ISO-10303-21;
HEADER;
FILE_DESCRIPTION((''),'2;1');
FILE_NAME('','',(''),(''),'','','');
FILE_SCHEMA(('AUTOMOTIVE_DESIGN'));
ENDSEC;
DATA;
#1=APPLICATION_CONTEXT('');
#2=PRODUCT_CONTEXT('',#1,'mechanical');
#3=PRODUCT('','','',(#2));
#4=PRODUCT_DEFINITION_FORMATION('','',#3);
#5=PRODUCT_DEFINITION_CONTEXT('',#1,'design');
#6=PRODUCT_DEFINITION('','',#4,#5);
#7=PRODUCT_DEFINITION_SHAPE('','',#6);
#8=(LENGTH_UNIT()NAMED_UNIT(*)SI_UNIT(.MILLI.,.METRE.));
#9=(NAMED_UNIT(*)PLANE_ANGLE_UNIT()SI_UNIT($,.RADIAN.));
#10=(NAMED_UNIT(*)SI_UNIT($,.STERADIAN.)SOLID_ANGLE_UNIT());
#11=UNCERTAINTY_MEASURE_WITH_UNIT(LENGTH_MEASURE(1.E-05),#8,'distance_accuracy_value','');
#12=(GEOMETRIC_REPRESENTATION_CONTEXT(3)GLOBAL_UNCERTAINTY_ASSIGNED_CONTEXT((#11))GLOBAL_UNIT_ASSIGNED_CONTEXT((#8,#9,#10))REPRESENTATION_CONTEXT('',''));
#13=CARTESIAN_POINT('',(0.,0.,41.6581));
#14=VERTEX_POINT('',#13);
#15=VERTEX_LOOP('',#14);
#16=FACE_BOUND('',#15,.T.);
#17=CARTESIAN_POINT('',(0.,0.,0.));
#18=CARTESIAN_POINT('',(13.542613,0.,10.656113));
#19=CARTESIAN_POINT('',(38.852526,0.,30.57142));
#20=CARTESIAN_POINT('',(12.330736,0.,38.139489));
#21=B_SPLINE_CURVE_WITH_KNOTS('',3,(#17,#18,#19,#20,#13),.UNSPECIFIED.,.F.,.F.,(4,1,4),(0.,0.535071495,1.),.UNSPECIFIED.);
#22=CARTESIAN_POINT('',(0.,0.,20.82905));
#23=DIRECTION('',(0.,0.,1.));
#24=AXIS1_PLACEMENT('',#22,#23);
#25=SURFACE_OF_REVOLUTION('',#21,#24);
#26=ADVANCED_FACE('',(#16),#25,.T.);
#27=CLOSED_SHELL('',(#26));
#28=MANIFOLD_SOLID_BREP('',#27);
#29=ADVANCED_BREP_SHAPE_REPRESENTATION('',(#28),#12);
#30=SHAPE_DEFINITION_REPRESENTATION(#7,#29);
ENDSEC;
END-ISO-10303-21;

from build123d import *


# Not quite as in the source:
# - the program builds the solid bodies; features that only make, move or delete a surface that nothing else refers to are left out


with BuildPart() as f1:
    # F0 (on Front) → F1 (revolve)
    with BuildSketch(Plane.XZ):
        with BuildLine():
            Line((0, 20.6253648025), (0, 0))
            add(Edge.make_bspline(
                [(0, 0), (13.5426130018, 10.6561129629), (31.7562955237, 24.9876942019), (23.1282978753, 32.9251076368), (19.8509394438, 34.7071183581)],
                knots=[0, 0, 0, 0, 0.5350714955, 0.7196264373, 0.7196264373, 0.7196264373, 0.7196264373], degree=3))
            ThreePointArc((19.8509394438, 34.7071183581), (12.1691780741, 24.5033032109), (0, 20.6253648025))
        make_face()
        with BuildLine():
            Line((0, 41.6580997407), (0, 20.6253648025))
            ThreePointArc((0, 20.6253648025), (12.1691780741, 24.5033032109), (19.8509394438, 34.7071183581))
            add(Edge.make_bspline(
                [(19.8509394438, 34.7071183581), (14.8720174437, 37.4143267914), (7.4360087219, 39.5362132661), (0, 41.6580997407)],
                knots=[0.7196264373, 0.7196264373, 0.7196264373, 0.7196264373, 1, 1, 1, 1], degree=3))
        make_face()
    revolve(axis=Axis((0, 0, 20.8290498704), (0, 0, 1)))


solid = f1.part
